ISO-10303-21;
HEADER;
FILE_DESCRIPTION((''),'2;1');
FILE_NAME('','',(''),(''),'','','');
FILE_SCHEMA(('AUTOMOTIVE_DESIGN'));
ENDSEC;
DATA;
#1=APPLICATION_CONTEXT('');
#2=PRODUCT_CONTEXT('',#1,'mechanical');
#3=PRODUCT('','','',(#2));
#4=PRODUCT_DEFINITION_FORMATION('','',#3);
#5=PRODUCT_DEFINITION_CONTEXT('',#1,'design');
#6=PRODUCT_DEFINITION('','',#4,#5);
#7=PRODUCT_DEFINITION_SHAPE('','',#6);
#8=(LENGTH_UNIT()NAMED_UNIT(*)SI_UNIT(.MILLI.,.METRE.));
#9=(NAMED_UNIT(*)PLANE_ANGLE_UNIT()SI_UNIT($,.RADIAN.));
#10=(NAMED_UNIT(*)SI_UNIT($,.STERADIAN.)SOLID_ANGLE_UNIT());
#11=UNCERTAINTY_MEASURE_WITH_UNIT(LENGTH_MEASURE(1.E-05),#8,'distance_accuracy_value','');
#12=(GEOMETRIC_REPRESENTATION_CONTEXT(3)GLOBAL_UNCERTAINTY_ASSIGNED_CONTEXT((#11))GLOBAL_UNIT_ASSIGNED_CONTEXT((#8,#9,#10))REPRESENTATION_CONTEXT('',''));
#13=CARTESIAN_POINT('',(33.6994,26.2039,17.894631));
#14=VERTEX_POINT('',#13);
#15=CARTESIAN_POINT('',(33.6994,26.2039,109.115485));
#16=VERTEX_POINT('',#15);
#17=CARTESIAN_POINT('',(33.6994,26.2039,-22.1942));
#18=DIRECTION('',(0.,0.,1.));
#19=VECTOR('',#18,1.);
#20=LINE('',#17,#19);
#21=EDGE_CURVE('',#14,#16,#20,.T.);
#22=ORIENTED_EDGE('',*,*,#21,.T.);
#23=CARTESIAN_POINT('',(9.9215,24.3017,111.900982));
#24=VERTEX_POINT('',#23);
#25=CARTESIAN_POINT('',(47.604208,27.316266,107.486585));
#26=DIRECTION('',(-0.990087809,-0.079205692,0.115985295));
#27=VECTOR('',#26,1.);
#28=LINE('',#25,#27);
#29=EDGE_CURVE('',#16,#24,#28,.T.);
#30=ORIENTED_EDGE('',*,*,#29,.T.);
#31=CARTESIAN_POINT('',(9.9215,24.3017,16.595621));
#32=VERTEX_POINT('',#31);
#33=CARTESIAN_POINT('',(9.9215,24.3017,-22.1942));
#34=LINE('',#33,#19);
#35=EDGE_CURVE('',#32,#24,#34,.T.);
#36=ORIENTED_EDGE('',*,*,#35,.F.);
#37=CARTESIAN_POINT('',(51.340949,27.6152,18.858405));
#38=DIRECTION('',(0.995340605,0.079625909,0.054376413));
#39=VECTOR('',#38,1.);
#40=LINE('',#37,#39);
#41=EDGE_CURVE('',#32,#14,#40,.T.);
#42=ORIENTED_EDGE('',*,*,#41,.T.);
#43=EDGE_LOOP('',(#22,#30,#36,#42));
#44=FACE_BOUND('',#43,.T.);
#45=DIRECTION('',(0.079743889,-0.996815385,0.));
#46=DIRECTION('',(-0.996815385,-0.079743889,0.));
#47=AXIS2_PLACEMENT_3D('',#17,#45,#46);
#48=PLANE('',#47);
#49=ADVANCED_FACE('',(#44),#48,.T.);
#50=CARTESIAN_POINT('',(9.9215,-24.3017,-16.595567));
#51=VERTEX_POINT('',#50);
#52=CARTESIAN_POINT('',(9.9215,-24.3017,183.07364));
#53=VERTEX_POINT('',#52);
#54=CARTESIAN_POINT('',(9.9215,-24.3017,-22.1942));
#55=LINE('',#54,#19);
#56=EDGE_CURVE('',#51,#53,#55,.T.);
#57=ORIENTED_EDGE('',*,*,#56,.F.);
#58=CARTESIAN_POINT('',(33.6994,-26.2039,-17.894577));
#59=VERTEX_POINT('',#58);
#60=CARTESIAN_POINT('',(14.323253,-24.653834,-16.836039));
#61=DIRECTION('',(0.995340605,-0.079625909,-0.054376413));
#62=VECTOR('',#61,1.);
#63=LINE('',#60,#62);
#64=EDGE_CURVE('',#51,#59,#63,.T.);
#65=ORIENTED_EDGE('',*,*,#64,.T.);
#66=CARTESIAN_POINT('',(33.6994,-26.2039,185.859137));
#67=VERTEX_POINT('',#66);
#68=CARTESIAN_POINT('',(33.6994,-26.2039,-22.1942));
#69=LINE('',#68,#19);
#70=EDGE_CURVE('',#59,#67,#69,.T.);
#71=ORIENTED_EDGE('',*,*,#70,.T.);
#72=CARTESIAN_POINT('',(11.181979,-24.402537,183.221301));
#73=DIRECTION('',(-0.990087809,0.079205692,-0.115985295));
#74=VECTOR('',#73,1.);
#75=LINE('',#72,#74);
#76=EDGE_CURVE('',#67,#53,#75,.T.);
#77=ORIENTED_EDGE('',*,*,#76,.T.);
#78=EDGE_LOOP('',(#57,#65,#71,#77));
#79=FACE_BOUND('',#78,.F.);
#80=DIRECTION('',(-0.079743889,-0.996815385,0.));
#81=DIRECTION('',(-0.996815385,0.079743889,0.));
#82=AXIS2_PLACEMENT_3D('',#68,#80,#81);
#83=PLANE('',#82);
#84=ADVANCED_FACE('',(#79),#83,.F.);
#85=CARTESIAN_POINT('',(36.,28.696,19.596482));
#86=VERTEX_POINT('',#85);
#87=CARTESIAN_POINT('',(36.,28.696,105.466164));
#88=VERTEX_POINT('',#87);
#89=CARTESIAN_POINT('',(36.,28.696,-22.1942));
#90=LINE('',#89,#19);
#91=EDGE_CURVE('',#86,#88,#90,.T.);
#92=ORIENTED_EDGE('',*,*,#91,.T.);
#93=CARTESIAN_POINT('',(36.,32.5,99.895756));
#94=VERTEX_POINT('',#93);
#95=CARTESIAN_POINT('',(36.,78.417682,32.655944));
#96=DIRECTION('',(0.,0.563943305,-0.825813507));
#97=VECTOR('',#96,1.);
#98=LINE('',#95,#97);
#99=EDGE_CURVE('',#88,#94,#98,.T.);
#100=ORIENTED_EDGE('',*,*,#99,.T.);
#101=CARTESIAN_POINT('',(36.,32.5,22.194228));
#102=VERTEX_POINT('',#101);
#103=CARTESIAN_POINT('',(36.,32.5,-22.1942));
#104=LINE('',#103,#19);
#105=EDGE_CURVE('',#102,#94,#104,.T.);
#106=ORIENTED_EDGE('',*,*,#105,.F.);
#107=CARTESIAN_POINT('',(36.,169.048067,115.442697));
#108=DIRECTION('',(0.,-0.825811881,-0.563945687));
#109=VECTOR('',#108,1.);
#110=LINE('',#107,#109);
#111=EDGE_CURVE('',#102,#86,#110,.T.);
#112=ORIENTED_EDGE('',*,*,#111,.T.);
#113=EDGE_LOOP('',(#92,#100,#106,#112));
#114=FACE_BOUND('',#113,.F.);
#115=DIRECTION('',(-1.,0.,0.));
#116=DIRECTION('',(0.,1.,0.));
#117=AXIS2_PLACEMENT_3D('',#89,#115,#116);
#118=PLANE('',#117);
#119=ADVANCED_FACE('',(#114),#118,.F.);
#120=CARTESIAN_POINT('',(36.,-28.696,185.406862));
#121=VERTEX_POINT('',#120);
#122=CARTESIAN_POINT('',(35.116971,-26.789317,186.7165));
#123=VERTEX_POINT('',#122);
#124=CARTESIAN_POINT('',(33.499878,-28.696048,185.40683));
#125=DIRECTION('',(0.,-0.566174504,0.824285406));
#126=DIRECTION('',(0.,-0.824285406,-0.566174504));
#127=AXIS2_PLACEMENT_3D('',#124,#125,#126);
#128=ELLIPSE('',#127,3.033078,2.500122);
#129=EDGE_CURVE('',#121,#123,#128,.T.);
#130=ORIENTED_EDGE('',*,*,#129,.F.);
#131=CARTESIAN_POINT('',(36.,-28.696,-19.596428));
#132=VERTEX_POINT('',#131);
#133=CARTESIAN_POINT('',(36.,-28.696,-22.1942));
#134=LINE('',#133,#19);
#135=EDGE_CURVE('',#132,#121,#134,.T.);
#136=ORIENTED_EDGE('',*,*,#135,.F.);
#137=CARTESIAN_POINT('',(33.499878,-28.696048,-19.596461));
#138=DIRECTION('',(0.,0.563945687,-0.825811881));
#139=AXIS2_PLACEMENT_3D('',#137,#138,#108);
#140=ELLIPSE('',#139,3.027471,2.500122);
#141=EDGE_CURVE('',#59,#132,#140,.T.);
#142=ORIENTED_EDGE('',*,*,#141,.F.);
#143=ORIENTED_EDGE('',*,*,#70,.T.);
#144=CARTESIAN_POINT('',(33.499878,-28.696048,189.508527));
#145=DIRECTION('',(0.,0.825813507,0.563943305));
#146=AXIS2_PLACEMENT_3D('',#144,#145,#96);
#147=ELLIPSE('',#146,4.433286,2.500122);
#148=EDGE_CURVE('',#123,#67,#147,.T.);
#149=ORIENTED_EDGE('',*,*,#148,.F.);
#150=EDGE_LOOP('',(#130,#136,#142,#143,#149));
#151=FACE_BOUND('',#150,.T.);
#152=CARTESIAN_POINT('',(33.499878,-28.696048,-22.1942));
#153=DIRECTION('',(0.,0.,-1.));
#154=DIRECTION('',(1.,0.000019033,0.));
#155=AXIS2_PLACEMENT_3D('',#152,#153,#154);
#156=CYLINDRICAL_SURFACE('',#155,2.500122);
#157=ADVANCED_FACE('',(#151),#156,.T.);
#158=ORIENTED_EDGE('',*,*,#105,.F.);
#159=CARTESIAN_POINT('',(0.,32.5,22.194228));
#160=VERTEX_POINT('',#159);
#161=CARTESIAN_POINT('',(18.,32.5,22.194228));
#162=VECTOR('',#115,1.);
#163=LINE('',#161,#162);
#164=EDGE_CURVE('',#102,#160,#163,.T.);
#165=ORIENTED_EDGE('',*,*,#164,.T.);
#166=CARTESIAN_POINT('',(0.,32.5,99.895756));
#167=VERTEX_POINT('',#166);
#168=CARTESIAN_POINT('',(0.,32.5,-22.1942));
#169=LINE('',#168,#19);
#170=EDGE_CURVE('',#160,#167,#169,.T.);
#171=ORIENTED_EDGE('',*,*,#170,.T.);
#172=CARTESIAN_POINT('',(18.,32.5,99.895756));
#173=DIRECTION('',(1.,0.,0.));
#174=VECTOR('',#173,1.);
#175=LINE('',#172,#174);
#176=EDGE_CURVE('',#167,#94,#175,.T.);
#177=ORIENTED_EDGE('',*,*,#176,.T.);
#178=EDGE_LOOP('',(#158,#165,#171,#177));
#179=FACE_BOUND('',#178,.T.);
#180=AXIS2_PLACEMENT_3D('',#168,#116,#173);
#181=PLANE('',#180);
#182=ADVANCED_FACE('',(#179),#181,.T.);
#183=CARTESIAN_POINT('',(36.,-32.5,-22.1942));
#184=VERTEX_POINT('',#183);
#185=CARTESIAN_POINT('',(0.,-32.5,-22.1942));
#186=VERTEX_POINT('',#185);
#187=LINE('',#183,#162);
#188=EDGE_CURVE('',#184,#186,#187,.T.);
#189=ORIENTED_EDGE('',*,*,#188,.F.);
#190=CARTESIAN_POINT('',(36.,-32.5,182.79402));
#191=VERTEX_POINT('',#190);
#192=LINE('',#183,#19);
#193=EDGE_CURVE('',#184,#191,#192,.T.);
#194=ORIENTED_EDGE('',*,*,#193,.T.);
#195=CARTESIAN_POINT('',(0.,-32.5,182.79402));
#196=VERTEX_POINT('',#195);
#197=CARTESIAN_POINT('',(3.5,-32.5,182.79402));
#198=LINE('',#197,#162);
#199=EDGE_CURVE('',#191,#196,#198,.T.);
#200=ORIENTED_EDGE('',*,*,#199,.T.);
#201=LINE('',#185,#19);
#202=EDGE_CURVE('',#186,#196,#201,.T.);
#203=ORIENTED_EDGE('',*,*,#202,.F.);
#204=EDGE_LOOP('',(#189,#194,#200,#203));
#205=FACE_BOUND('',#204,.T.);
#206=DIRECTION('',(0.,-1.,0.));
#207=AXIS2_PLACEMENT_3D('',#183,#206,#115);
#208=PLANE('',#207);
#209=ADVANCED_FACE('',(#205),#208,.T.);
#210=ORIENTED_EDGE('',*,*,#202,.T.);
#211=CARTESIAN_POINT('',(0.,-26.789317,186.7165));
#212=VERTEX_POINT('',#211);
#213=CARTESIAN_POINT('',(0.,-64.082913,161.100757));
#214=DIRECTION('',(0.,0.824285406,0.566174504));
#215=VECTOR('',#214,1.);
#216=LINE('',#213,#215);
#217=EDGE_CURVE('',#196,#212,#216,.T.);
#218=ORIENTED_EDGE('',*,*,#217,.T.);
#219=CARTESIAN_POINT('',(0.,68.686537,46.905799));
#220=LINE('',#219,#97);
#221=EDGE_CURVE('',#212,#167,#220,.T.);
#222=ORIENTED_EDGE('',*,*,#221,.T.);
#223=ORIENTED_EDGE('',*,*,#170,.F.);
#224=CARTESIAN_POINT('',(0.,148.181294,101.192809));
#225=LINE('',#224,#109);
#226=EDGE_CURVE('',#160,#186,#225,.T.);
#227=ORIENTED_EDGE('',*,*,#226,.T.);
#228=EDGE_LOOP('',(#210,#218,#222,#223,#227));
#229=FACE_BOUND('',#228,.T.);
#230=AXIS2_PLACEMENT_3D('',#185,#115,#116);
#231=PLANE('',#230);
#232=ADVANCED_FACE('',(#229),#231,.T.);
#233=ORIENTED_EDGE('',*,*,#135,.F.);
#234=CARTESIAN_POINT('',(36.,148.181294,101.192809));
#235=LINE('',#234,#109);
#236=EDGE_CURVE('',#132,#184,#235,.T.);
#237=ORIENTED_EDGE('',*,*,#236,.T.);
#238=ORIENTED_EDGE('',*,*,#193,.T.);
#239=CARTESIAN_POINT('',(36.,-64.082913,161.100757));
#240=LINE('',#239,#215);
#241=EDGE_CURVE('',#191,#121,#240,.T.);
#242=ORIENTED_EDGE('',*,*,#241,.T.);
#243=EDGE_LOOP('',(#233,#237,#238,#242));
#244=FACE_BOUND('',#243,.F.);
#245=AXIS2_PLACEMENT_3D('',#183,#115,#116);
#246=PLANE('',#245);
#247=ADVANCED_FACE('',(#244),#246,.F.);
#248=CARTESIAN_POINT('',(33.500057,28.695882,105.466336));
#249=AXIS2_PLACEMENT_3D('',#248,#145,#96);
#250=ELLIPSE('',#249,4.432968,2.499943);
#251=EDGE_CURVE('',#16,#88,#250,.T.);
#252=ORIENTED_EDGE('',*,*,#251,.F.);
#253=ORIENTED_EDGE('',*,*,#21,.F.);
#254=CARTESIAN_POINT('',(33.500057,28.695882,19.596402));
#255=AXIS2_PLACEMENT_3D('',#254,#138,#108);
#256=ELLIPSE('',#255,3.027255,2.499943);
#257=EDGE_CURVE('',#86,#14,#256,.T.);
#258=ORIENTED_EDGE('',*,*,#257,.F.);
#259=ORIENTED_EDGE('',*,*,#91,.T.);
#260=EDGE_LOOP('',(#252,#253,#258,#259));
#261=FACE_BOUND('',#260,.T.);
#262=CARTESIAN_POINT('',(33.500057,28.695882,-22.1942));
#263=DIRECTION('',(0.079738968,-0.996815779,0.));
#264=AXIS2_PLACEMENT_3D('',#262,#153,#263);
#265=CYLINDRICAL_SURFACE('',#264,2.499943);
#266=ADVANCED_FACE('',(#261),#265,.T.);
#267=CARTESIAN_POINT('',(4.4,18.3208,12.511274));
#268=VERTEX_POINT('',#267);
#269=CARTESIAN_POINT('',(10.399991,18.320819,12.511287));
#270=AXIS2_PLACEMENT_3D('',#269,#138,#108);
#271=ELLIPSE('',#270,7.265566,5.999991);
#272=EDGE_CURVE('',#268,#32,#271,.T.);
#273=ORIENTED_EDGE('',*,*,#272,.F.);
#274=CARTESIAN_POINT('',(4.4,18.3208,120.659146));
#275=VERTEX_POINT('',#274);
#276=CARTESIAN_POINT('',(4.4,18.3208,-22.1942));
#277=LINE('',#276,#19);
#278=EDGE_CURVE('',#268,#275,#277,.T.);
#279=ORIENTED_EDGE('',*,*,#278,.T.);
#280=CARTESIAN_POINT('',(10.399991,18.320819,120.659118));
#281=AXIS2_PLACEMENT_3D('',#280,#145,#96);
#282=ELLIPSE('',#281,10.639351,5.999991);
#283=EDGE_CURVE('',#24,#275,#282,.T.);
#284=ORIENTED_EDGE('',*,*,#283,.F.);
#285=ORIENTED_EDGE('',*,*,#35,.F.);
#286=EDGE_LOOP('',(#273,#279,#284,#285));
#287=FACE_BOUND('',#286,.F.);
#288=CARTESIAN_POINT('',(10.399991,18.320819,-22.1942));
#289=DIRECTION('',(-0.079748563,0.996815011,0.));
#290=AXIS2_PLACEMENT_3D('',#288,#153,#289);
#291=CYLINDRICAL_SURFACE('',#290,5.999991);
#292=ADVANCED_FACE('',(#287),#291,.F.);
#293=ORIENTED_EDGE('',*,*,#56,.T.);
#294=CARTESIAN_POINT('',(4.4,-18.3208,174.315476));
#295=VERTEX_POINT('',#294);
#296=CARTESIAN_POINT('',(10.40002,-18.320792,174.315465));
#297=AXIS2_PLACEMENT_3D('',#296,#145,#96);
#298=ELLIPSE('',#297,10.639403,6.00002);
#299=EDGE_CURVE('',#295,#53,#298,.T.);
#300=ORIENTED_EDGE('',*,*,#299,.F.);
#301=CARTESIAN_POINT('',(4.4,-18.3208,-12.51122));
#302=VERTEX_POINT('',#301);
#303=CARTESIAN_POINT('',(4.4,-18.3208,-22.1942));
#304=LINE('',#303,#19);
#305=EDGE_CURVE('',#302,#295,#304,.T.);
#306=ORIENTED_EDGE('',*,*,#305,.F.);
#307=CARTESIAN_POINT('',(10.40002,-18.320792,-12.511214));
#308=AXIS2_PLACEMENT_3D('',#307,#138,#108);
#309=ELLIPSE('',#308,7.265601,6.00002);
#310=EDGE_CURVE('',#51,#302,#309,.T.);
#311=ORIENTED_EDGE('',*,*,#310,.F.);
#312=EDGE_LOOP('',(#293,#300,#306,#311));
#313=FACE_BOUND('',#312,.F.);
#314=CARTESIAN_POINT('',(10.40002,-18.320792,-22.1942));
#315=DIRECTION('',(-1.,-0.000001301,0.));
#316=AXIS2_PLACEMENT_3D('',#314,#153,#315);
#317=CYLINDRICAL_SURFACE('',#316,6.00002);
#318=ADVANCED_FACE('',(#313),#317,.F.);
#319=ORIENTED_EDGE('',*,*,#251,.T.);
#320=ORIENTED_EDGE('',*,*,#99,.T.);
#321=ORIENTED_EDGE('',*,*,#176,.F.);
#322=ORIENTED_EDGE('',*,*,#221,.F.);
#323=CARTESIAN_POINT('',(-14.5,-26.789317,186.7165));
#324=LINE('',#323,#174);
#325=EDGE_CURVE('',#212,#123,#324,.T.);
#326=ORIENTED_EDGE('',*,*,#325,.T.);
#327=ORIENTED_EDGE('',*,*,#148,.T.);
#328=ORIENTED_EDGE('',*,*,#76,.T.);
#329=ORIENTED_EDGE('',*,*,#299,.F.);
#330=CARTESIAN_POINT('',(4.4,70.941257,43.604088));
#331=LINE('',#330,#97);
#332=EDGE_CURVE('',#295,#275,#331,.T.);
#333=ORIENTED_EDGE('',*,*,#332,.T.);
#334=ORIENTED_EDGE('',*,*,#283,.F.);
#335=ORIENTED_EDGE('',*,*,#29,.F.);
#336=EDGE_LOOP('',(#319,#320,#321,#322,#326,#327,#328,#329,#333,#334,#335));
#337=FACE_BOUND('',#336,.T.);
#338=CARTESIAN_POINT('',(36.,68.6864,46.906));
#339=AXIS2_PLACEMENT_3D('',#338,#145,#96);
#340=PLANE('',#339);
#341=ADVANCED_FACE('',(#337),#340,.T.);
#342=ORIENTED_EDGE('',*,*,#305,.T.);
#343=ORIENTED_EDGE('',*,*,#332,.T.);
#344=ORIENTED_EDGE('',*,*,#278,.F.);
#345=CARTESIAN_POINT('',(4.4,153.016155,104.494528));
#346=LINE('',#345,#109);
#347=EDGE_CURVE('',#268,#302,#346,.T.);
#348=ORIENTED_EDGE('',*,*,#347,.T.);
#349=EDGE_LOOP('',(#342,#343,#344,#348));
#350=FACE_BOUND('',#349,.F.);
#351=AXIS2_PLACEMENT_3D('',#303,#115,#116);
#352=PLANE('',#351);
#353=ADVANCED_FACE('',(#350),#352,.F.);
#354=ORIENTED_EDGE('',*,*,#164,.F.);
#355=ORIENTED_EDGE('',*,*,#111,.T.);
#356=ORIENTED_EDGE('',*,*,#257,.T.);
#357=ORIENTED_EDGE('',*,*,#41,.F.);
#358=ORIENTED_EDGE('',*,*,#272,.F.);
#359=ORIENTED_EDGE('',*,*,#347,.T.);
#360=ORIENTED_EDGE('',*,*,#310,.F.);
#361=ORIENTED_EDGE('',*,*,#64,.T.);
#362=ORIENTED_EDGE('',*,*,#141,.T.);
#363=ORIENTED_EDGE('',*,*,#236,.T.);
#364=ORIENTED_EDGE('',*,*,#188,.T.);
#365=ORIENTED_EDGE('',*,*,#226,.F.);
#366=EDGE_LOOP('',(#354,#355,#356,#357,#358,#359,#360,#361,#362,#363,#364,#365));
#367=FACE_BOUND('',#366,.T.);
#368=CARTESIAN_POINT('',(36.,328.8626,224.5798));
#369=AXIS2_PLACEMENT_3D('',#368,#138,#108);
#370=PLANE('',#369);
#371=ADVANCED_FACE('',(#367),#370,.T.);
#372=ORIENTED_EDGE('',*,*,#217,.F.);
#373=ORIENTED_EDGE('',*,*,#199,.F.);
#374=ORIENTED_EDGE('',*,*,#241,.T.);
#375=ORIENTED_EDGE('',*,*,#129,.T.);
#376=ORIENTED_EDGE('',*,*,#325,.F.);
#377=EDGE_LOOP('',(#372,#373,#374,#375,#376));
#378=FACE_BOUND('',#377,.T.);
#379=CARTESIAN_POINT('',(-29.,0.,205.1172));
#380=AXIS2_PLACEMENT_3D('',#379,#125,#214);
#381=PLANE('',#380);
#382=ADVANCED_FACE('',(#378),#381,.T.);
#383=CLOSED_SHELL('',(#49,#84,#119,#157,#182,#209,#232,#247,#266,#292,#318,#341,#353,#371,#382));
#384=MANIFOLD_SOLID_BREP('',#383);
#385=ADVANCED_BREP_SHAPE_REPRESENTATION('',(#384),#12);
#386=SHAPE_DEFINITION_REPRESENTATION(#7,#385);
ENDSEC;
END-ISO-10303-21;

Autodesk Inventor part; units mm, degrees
ref_plane "Начальная плоскость" through (0, 0, -22.1942) normal (0, 0, 1) x (1, 0, 0)
ref_plane "Конечная плоскость" through (0, 0, 186.7165) normal (0, 0, 1) x (1, 0, 0)
sketch "Эскиз" plane through (0, 0, 0) normal (0, 0, 1) x (1, 0, 0)
  line L0 (36, -32.5) -> (0, -32.5)
  line L1 (36, -32.5) -> (36, -28.696)
  line L2 (33.6994, -26.2039) -> (9.9215, -24.3017)
  line L3 (4.4, -18.3208) -> (4.4, 18.3208)
  line L4 (33.6994, 26.2039) -> (9.9215, 24.3017)
  line L5 (36, 28.696) -> (36, 32.5)
  line L6 (0, 32.5) -> (36, 32.5)
  line L7 (0, -32.5) -> (0, 32.5)
  arc A0 (4.4, -18.3208) -> (9.9215, -24.3017) centre (10.4, -18.3208) ccw
  arc A1 (9.9215, 24.3017) -> (4.4, 18.3208) centre (10.4, 18.3208) ccw
  arc A2 (36, -28.696) -> (33.6994, -26.2039) centre (33.5, -28.696) ccw
  arc A3 (33.6994, 26.2039) -> (36, 28.696) centre (33.5, 28.696) ccw
  line L8 (0, 45.5) -> (0, -45.5) construction
  line L9 (-7.2974, 0) -> (43.7847, 0) construction
  point P0 (36, -26.388)
  point P1 (4.4, -23.86)
  point P2 (4.4, 23.86)
  point P3 (36, 26.388)
  dimension "d3" = 36
  dimension "d5" = 4.4
  dimension "d7" = 65
  dimension "d9" = 8.64
  dimension "d11" = 8.64
  dimension "d13" = 6.112
  dimension "d15" = 6.112
  dimension "d22" = 6
  dimension "d23" = 2.5
  dimension "d24" = 32.5
  dimension "d25" = 0
extrude "Тело" add sketch "Эскиз" along normal up to surface (208.9107 mm away) from surface at -22.1942
sketch "Sketch3" plane through (0, 0, 0) normal (0, 0, 1) x (1, 0, 0)
  line L0 (0, 0) -> (10, 0)
ref_plane "Work Plane7" through (0, 0, 0) normal (0, -1, 0) x (1, 0, 0)
sketch "Sketch4" plane through (0, 0, 0) normal (0, -1, 0) x (1, 0, 0)
  line L0 (-2, -22.1942) -> (12, -22.1942)
  line L1 (-2, 186.7165) -> (12, 186.7165)
  dimension "d29" = 208.9107
ref_plane "РабПлоскость8" through (-29, 0, 205.1172) normal (0, -0.5661745, 0.8242854) x (1, 0, 0)
split "Разделение1" plane through (-29, 0, 205.1172) removes the side toward (0, -0.5661745, 0.8242854)
ref_plane "РабПлоскость9" through (36, 328.8626, 224.5798) normal (0, 0.5639457, -0.8258119) x (1, 0, 0)
split "Разделение2" plane through (36, 328.8626, 224.5798) removes the side toward (0, 0.5639457, -0.8258119)
ref_plane "РабПлоскость10" through (36, 68.6864, 46.906) normal (0, 0.8258135, 0.5639433) x (1, 0, 0)
split "Разделение3" plane through (36, 68.6864, 46.906) removes the side toward (0, 0.8258135, 0.5639433)
equation "\"d3\" = b"
equation "\"d5\" = t1"
equation "\"d7\" = ParH"
equation "\"d9\" = msp_x1 + t2"
equation "\"d11\" = msp_x1 + t2"
equation "\"d13\" = -msp_x2 + t2"
equation "\"d15\" = -msp_x2 + t2"
equation "\"d22\" = R"
equation "\"d23\" = R1"
equation "\"d24\" = 0.5 * d7"
equation "\"d16\" = G_L"
equation "\"R1\" = 2.5"
equation "\"R\" = 6"
equation "\"t1\" = 4.4"
equation "\"t2\" = 7.2"
equation "\"ParH\" = 65"
equation "\"b\" = 36"
equation "\"msp_x1\" = 0.04 * b"
equation "\"msp_x2\" = -0.08 * t1 + 0.04 * b"
equation "\"G_L\" = d29"
equation "\"ex\" = 0"
equation "\"G_OFFSET_START\" = 22.1942"
equation "\"G_OFFSET_END\" = -18.40074"
equation "\"d26\" = -G_OFFSET_START"
equation "\"d27\" = G_OFFSET_END + B_L"
equation "\"B_L\" = 205.11724"
properties part number "Швеллер 6.5U-208,91 ГОСТ 8240-97" material "Сталь, мягкая"
